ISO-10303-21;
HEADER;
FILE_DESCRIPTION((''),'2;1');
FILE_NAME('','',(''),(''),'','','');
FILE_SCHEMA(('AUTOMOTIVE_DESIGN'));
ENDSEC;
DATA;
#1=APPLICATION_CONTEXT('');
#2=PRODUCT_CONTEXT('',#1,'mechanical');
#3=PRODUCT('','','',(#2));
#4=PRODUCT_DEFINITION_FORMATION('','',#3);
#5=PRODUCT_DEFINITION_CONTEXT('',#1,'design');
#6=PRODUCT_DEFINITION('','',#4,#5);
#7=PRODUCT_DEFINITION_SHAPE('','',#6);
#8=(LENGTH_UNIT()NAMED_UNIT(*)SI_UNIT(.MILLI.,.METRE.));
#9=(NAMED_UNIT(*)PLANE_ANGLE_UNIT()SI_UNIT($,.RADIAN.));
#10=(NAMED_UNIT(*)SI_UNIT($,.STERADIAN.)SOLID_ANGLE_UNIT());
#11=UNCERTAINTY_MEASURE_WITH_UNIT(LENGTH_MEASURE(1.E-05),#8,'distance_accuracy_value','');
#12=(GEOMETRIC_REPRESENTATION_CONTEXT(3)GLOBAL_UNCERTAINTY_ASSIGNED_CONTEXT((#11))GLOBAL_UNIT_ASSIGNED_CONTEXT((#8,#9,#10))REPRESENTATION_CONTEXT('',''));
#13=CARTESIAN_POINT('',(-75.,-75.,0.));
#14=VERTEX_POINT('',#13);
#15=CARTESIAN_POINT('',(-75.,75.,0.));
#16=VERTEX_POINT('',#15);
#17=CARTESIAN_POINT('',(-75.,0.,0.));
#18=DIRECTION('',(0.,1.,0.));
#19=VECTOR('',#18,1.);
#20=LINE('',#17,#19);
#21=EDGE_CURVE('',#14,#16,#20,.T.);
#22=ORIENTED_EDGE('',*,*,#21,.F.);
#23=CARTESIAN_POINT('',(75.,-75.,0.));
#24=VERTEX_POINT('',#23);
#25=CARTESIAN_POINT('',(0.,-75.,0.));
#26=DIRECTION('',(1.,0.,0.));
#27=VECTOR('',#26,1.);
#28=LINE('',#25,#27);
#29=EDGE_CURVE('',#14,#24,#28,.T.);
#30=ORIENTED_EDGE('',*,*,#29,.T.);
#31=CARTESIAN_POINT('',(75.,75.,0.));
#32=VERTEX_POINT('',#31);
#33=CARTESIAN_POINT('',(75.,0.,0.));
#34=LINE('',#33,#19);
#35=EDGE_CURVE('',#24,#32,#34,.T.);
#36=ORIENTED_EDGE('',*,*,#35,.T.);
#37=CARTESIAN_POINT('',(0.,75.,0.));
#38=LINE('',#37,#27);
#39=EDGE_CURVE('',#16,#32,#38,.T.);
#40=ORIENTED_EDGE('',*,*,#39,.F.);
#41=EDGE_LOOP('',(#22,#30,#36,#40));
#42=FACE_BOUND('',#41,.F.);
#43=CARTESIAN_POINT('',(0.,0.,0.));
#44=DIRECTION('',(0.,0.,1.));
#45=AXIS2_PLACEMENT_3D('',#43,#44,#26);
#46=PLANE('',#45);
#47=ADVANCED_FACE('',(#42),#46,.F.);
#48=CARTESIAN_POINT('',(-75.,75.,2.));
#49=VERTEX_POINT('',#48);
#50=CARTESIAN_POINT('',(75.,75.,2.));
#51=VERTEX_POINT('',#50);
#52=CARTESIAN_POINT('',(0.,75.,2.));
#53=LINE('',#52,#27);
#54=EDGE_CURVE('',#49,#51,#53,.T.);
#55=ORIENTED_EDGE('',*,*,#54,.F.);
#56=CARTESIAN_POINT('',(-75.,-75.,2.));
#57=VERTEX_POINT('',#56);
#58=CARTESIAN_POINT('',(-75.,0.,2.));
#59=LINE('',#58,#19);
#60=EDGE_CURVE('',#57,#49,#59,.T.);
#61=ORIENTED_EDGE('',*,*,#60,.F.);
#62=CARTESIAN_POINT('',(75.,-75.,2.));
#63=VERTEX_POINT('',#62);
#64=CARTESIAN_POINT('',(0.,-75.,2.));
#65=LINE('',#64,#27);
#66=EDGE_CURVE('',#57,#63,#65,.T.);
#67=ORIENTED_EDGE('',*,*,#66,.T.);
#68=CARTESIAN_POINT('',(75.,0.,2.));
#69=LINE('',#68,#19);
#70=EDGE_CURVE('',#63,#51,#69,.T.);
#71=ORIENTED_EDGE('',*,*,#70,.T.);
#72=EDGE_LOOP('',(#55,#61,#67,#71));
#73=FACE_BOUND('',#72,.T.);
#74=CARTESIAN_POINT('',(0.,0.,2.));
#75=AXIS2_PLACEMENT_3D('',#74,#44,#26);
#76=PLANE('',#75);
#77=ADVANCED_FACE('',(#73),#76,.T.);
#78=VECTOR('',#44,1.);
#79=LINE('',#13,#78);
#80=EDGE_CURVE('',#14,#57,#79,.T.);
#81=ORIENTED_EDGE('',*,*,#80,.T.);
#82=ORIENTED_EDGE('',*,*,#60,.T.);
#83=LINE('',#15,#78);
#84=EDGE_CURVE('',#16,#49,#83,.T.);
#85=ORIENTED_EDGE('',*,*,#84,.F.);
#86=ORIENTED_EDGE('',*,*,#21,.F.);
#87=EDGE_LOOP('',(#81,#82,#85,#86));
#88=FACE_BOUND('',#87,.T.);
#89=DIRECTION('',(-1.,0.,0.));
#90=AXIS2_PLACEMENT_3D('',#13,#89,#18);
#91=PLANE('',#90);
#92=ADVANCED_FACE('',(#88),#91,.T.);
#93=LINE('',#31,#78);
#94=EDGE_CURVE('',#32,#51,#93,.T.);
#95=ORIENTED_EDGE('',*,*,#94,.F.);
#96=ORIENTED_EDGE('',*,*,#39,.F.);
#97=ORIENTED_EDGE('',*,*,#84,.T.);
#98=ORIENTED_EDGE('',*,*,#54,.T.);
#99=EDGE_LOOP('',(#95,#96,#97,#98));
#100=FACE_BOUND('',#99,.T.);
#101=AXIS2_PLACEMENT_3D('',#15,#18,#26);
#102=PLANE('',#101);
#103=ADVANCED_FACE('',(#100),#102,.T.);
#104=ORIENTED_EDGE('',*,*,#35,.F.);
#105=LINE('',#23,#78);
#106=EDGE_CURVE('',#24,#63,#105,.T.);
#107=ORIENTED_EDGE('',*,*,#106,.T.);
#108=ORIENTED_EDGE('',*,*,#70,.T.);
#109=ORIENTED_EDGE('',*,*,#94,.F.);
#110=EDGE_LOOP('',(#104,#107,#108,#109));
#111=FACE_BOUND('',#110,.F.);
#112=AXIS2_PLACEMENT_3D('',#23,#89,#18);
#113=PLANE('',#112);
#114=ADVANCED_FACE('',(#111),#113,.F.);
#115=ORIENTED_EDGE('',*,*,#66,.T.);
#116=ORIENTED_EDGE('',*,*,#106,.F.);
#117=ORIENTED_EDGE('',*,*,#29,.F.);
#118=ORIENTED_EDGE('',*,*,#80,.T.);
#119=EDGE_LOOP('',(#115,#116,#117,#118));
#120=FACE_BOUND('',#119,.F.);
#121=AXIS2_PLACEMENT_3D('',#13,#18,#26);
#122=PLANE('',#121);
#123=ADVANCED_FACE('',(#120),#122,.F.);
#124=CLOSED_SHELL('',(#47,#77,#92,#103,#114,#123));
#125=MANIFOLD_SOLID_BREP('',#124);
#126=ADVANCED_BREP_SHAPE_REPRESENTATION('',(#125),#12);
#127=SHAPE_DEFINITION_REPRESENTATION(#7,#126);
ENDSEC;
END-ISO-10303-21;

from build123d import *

# Parameters (mm, degrees)
F0_W     = 150
F0_H     = 150
F1_DEPTH = 2


# Not quite as in the source:
# - a feature of the source that left no trace in its solid (it failed there, or was rolled back) is left out


with BuildPart() as f1:
    # F0 (on Top) → F1 (new body)
    with BuildSketch(Plane.XY):
        Rectangle(F0_W, F0_H)
    extrude(amount=F1_DEPTH)


solid = f1.part
